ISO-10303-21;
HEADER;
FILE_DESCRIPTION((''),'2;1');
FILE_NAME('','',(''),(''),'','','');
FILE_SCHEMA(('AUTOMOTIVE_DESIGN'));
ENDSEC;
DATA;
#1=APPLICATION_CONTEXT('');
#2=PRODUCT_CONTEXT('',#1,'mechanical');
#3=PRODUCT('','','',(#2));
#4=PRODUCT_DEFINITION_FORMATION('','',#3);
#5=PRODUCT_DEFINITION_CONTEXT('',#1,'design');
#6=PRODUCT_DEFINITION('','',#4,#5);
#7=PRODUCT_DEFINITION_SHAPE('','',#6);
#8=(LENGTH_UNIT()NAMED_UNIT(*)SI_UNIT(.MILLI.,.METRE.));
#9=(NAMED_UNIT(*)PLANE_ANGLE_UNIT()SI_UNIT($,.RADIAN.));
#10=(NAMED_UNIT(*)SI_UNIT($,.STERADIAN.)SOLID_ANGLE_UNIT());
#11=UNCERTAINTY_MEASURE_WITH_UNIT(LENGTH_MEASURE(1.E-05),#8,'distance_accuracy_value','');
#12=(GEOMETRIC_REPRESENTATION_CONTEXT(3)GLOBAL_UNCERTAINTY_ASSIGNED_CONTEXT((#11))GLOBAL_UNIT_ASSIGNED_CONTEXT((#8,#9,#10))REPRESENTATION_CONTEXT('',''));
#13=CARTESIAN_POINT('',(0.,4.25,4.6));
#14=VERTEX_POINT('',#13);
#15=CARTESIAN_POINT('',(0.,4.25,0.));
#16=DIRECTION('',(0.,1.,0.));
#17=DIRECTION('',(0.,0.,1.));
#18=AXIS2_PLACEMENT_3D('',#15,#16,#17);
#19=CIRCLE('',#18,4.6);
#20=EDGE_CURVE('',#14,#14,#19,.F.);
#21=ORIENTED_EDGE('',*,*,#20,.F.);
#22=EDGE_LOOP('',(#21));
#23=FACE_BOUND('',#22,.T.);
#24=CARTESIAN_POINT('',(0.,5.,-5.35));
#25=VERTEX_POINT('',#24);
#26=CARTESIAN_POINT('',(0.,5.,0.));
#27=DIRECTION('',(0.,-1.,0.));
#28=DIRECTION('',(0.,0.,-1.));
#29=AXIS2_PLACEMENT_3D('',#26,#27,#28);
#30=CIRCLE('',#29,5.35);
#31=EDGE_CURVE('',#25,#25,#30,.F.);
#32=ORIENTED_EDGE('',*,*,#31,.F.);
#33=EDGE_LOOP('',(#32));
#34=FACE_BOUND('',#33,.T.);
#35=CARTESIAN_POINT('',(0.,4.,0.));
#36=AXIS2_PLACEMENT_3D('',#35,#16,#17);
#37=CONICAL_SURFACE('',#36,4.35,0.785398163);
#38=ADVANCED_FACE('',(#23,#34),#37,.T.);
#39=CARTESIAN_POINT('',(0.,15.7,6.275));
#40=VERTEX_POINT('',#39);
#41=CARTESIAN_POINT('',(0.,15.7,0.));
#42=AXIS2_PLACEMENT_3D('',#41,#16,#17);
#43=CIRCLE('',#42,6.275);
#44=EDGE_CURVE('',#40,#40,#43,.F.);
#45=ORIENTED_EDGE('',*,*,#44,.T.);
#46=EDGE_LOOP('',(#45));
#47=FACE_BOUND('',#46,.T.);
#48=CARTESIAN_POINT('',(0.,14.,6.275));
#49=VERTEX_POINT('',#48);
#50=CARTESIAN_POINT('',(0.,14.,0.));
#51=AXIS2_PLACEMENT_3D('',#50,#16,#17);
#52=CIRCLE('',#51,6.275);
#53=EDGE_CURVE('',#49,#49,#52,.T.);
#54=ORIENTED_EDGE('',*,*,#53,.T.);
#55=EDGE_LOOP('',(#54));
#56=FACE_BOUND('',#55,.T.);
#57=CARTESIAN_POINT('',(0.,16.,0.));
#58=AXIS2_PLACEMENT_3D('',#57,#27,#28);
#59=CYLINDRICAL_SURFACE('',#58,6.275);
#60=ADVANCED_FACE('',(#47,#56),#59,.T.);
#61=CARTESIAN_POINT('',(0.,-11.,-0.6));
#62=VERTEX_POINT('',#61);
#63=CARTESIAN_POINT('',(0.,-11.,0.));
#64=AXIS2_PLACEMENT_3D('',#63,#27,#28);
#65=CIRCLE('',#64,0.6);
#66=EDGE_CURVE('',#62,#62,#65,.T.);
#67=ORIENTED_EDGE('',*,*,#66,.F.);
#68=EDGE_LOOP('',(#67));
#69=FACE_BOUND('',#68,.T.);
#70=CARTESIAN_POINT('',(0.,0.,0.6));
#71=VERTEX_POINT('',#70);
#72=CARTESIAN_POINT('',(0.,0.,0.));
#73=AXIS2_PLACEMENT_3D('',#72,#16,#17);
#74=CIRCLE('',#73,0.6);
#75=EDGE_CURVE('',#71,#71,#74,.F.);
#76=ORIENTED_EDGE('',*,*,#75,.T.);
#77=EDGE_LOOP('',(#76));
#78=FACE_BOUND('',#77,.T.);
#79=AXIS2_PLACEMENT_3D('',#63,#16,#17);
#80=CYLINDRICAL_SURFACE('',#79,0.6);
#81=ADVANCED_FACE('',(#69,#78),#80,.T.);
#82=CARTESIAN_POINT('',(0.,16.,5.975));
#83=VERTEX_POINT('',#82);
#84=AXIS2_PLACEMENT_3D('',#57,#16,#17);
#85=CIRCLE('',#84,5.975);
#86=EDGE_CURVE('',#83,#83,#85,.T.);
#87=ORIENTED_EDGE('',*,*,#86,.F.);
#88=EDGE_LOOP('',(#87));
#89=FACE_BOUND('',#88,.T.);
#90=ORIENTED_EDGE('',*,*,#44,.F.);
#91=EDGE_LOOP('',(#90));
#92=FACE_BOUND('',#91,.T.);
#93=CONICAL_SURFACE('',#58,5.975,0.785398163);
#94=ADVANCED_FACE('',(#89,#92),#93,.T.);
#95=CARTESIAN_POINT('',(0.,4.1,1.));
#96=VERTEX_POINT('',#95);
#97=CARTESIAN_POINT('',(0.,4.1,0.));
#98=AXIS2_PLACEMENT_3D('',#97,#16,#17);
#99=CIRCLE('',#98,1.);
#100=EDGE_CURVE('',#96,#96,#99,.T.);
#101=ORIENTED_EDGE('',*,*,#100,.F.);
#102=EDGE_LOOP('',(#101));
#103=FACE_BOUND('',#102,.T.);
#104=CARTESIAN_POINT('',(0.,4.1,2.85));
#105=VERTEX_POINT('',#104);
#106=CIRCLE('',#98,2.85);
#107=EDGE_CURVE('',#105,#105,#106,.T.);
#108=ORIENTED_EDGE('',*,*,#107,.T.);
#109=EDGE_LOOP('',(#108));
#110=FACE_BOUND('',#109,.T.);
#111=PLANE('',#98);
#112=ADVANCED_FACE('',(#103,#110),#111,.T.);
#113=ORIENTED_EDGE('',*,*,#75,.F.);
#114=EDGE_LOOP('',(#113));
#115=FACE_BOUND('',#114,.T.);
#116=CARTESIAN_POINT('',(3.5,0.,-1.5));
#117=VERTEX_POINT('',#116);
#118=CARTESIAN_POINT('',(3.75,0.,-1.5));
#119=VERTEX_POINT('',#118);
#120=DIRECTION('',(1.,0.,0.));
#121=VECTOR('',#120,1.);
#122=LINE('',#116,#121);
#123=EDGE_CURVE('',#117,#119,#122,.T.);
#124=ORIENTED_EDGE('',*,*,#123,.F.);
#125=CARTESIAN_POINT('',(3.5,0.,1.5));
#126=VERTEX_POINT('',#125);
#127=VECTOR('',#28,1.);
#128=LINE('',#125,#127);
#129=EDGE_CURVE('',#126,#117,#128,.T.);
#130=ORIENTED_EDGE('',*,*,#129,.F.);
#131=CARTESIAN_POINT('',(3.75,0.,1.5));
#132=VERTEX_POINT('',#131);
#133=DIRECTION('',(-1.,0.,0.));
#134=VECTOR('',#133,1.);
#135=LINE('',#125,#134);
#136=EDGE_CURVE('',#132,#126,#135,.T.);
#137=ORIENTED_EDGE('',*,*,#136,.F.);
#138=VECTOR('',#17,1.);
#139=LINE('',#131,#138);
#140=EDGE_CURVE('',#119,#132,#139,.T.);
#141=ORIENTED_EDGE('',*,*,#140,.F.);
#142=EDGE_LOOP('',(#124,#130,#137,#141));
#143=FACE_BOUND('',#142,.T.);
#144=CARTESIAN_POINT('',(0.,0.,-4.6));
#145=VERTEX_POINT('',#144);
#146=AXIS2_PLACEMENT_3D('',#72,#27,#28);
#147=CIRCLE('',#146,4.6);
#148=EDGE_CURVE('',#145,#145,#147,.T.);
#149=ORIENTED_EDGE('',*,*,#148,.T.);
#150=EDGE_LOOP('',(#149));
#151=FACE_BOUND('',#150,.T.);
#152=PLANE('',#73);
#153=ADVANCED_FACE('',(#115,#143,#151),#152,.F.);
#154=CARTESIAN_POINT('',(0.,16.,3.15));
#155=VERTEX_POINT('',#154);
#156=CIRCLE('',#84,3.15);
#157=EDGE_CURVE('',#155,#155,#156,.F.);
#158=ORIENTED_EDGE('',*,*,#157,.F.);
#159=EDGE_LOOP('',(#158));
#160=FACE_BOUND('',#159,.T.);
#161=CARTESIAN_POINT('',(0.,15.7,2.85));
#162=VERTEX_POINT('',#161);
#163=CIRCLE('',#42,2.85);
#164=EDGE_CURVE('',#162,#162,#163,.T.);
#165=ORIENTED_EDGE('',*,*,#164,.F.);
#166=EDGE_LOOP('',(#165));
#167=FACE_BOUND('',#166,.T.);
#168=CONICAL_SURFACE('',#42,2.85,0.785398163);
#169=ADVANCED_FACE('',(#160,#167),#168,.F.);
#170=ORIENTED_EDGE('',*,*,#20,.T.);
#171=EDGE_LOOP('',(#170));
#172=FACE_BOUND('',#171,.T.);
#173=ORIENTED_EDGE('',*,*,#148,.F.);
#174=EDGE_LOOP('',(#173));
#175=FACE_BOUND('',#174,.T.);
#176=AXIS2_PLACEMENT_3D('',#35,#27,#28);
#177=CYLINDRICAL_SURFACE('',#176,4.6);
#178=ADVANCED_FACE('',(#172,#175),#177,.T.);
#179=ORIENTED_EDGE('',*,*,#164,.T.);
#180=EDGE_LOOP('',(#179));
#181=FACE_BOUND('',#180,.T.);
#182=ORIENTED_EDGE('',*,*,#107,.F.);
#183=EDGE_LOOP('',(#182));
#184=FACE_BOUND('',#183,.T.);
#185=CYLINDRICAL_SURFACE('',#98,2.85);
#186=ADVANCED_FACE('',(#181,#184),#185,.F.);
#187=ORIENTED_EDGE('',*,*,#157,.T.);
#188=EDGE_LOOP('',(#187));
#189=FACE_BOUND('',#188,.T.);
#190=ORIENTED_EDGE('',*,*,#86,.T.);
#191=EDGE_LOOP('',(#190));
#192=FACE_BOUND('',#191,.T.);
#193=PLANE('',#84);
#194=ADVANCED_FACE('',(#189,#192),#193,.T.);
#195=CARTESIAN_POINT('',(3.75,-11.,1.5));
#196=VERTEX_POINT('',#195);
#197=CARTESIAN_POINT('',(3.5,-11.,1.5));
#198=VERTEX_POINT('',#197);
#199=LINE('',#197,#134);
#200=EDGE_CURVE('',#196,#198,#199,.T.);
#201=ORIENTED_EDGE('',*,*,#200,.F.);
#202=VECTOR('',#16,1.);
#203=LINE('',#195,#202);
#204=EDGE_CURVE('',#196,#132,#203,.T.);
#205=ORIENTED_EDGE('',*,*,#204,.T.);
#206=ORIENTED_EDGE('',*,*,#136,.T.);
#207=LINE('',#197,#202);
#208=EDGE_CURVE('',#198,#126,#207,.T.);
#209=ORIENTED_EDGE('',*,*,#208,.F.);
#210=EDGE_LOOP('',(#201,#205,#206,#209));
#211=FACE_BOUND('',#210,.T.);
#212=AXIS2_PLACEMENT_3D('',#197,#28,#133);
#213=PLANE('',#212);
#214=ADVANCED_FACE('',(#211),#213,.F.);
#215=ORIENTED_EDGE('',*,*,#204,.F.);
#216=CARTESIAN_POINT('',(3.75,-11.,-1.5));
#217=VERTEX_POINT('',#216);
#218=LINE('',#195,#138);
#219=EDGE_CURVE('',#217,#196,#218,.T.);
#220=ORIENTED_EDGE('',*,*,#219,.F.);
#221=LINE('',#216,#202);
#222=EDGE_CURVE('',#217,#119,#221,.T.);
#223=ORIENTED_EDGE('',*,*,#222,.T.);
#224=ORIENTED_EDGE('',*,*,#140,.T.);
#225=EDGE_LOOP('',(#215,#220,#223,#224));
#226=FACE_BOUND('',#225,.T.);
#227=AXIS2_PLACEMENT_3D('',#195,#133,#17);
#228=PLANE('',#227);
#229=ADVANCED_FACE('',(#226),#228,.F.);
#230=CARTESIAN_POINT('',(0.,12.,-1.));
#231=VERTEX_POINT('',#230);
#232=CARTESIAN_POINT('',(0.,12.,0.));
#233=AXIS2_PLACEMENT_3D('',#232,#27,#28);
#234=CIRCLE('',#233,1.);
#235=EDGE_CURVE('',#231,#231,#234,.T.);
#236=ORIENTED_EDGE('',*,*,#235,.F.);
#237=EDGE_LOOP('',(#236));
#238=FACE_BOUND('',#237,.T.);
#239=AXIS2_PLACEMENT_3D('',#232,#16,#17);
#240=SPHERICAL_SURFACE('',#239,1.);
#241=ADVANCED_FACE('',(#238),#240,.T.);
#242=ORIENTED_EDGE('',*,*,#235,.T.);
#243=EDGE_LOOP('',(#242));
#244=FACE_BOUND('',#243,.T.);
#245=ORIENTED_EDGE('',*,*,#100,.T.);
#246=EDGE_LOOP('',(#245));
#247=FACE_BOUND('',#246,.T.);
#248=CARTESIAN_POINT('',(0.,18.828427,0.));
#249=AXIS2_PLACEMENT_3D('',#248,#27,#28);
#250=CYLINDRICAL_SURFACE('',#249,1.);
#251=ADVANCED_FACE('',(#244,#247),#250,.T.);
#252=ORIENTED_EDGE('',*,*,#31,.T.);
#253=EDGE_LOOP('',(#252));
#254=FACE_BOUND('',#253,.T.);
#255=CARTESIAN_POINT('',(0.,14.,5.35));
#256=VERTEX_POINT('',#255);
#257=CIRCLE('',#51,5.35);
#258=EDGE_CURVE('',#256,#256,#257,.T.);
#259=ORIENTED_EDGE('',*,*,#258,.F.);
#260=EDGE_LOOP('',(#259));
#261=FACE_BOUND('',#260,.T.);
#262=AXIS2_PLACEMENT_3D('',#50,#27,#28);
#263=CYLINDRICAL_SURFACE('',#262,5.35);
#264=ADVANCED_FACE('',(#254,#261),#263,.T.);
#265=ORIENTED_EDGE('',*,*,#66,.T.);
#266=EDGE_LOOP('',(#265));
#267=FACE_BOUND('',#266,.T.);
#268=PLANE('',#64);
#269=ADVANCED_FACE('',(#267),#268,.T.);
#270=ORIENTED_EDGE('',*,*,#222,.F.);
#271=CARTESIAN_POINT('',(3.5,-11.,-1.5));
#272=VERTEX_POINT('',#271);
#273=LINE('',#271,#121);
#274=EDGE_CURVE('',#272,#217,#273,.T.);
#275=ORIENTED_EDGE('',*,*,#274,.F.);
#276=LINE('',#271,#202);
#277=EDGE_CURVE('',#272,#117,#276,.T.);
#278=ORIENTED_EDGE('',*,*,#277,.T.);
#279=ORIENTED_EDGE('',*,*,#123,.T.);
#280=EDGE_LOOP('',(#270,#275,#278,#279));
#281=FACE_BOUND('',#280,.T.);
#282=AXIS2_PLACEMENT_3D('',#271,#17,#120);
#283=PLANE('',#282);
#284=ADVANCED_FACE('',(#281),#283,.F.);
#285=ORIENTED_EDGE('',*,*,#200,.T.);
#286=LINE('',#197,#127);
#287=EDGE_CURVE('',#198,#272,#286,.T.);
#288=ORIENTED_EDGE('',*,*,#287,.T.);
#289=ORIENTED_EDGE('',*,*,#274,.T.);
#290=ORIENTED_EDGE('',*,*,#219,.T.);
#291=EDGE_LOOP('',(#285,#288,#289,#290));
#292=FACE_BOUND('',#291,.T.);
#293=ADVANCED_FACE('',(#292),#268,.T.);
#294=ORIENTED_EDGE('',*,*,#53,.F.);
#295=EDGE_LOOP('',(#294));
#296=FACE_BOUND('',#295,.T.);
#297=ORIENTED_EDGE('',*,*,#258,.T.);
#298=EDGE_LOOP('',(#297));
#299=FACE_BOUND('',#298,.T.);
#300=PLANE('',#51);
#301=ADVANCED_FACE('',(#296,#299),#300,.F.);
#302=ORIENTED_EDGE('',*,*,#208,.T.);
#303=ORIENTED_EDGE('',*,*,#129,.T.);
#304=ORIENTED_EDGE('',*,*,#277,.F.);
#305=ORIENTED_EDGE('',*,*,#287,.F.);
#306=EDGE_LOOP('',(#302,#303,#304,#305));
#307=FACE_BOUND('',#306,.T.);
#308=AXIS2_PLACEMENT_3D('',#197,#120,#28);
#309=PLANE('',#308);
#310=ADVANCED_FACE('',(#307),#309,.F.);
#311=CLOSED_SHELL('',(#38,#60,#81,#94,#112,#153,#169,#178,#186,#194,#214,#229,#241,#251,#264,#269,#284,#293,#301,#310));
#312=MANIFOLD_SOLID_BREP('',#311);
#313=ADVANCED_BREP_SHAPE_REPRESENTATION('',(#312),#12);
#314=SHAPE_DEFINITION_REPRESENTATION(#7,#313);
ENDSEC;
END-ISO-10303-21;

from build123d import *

# Parameters (mm, degrees)
SKETCH1_R           = 5.35
BOSS_EXTRUDE1_DEPTH = 14
SKETCH2_R           = 6.275
BOSS_EXTRUDE2_DEPTH = 2
SKETCH3_R           = 2.85
CUT_EXTRUDE1_DEPTH  = 11.9
SKETCH4_R           = 1
BOSS_EXTRUDE3_DEPTH = 8.9
FILLET1_R           = 1
CHAMFER1_SIZE       = 0.3
SKETCH5_R           = 5.35
SKETCH5_R_2         = 4.6
CUT_EXTRUDE2_DEPTH  = 4
CHAMFER2_SIZE       = 1
SKETCH6_R           = 0.6
SKETCH6_W           = 0.25
SKETCH6_H           = 3
BOSS_EXTRUDE4_DEPTH = 11


with BuildPart() as part:
    # Sketch1 → Boss-Extrude1 (new body)
    with BuildSketch(Plane(origin=(0, 0, 0), x_dir=(1, 0, 0), z_dir=(0, 1, 0))):
        with Locations(Location((0, 0, 0), (0, 0, 270))):
            Circle(SKETCH1_R)
    extrude(amount=BOSS_EXTRUDE1_DEPTH)

    # Sketch2 → Boss-Extrude2 (add)
    with BuildSketch(Plane(origin=(0, 14, 0), x_dir=(1, 0, 0), z_dir=(0, 1, 0))):
        with Locations(Location((0, 0, 0), (0, 0, 270))):
            Circle(SKETCH2_R)
    extrude(amount=BOSS_EXTRUDE2_DEPTH)

    # Sketch3 → Cut-Extrude1 (cut)
    with BuildSketch(Plane(origin=(0, 16, 0), x_dir=(1, 0, 0), z_dir=(0, 1, 0))):
        with Locations(Location((0, 0, 0), (0, 0, 270))):
            Circle(SKETCH3_R)
    extrude(amount=-CUT_EXTRUDE1_DEPTH, mode=Mode.SUBTRACT)

    # Sketch4 → Boss-Extrude3 (add)
    with BuildSketch(Plane(origin=(0, 4.1, 0), x_dir=(1, 0, 0), z_dir=(0, 1, 0))):
        with Locations(Location((0, 0, 0), (0, 0, 270))):
            Circle(SKETCH4_R)
    extrude(amount=BOSS_EXTRUDE3_DEPTH)

    # Fillet1
    fillet1_edges = [part.edges().sort_by_distance(p)[0] for p in [
        (0, 13, -1),
    ]]
    fillet(fillet1_edges, radius=FILLET1_R)

    # Chamfer1
    chamfer1_edges = [part.edges().sort_by_distance(p)[0] for p in [
        (0, 16, -2.85),
        (0, 16, -6.275),
    ]]
    chamfer(chamfer1_edges, length=CHAMFER1_SIZE)

    # Sketch5 → Cut-Extrude2 (cut)
    with BuildSketch(Plane.XZ):
        with Locations(Location((0, 0, 0), (0, 0, 270))):
            Circle(SKETCH5_R)
        with Locations(Location((0, 0, 0), (0, 0, 270))):
            Circle(SKETCH5_R_2, mode=Mode.SUBTRACT)
    extrude(amount=-CUT_EXTRUDE2_DEPTH, mode=Mode.SUBTRACT)

    # Chamfer2
    # the kernel refuses this chamfer: 1 mm, written as the material it takes off along each edge
    with BuildSketch(Plane(origin=(0, 4, 0), x_dir=(0, 0, 1), z_dir=(-1, 0, 0))) as chamfer2_piece_1_section:
        Polygon((5.35, CHAMFER2_SIZE), (5.35 - CHAMFER2_SIZE, 0), (5.35, 0), align=None)
    chamfer2_piece_1 = revolve(axis=Axis((0, 4, 0), (0, 1, 0)), mode=Mode.PRIVATE)
    chamfer2_piece_1 = chamfer2_piece_1 - Plane(origin=(0, 4.621256609, 0), x_dir=(0, 0, -1), z_dir=(0, -1, 0)) * Cylinder(4.6, 22, mode=Mode.PRIVATE)
    add(chamfer2_piece_1, mode=Mode.SUBTRACT)

    # Sketch6 → Boss-Extrude4 (add)
    with BuildSketch(Plane.XZ):
        with Locations(Location((0, 0, 0), (0, 0, 90))):
            Circle(SKETCH6_R)
        with Locations((3.625, 0)):
            Rectangle(SKETCH6_W, SKETCH6_H)
    extrude(amount=BOSS_EXTRUDE4_DEPTH)


solid = part.part
